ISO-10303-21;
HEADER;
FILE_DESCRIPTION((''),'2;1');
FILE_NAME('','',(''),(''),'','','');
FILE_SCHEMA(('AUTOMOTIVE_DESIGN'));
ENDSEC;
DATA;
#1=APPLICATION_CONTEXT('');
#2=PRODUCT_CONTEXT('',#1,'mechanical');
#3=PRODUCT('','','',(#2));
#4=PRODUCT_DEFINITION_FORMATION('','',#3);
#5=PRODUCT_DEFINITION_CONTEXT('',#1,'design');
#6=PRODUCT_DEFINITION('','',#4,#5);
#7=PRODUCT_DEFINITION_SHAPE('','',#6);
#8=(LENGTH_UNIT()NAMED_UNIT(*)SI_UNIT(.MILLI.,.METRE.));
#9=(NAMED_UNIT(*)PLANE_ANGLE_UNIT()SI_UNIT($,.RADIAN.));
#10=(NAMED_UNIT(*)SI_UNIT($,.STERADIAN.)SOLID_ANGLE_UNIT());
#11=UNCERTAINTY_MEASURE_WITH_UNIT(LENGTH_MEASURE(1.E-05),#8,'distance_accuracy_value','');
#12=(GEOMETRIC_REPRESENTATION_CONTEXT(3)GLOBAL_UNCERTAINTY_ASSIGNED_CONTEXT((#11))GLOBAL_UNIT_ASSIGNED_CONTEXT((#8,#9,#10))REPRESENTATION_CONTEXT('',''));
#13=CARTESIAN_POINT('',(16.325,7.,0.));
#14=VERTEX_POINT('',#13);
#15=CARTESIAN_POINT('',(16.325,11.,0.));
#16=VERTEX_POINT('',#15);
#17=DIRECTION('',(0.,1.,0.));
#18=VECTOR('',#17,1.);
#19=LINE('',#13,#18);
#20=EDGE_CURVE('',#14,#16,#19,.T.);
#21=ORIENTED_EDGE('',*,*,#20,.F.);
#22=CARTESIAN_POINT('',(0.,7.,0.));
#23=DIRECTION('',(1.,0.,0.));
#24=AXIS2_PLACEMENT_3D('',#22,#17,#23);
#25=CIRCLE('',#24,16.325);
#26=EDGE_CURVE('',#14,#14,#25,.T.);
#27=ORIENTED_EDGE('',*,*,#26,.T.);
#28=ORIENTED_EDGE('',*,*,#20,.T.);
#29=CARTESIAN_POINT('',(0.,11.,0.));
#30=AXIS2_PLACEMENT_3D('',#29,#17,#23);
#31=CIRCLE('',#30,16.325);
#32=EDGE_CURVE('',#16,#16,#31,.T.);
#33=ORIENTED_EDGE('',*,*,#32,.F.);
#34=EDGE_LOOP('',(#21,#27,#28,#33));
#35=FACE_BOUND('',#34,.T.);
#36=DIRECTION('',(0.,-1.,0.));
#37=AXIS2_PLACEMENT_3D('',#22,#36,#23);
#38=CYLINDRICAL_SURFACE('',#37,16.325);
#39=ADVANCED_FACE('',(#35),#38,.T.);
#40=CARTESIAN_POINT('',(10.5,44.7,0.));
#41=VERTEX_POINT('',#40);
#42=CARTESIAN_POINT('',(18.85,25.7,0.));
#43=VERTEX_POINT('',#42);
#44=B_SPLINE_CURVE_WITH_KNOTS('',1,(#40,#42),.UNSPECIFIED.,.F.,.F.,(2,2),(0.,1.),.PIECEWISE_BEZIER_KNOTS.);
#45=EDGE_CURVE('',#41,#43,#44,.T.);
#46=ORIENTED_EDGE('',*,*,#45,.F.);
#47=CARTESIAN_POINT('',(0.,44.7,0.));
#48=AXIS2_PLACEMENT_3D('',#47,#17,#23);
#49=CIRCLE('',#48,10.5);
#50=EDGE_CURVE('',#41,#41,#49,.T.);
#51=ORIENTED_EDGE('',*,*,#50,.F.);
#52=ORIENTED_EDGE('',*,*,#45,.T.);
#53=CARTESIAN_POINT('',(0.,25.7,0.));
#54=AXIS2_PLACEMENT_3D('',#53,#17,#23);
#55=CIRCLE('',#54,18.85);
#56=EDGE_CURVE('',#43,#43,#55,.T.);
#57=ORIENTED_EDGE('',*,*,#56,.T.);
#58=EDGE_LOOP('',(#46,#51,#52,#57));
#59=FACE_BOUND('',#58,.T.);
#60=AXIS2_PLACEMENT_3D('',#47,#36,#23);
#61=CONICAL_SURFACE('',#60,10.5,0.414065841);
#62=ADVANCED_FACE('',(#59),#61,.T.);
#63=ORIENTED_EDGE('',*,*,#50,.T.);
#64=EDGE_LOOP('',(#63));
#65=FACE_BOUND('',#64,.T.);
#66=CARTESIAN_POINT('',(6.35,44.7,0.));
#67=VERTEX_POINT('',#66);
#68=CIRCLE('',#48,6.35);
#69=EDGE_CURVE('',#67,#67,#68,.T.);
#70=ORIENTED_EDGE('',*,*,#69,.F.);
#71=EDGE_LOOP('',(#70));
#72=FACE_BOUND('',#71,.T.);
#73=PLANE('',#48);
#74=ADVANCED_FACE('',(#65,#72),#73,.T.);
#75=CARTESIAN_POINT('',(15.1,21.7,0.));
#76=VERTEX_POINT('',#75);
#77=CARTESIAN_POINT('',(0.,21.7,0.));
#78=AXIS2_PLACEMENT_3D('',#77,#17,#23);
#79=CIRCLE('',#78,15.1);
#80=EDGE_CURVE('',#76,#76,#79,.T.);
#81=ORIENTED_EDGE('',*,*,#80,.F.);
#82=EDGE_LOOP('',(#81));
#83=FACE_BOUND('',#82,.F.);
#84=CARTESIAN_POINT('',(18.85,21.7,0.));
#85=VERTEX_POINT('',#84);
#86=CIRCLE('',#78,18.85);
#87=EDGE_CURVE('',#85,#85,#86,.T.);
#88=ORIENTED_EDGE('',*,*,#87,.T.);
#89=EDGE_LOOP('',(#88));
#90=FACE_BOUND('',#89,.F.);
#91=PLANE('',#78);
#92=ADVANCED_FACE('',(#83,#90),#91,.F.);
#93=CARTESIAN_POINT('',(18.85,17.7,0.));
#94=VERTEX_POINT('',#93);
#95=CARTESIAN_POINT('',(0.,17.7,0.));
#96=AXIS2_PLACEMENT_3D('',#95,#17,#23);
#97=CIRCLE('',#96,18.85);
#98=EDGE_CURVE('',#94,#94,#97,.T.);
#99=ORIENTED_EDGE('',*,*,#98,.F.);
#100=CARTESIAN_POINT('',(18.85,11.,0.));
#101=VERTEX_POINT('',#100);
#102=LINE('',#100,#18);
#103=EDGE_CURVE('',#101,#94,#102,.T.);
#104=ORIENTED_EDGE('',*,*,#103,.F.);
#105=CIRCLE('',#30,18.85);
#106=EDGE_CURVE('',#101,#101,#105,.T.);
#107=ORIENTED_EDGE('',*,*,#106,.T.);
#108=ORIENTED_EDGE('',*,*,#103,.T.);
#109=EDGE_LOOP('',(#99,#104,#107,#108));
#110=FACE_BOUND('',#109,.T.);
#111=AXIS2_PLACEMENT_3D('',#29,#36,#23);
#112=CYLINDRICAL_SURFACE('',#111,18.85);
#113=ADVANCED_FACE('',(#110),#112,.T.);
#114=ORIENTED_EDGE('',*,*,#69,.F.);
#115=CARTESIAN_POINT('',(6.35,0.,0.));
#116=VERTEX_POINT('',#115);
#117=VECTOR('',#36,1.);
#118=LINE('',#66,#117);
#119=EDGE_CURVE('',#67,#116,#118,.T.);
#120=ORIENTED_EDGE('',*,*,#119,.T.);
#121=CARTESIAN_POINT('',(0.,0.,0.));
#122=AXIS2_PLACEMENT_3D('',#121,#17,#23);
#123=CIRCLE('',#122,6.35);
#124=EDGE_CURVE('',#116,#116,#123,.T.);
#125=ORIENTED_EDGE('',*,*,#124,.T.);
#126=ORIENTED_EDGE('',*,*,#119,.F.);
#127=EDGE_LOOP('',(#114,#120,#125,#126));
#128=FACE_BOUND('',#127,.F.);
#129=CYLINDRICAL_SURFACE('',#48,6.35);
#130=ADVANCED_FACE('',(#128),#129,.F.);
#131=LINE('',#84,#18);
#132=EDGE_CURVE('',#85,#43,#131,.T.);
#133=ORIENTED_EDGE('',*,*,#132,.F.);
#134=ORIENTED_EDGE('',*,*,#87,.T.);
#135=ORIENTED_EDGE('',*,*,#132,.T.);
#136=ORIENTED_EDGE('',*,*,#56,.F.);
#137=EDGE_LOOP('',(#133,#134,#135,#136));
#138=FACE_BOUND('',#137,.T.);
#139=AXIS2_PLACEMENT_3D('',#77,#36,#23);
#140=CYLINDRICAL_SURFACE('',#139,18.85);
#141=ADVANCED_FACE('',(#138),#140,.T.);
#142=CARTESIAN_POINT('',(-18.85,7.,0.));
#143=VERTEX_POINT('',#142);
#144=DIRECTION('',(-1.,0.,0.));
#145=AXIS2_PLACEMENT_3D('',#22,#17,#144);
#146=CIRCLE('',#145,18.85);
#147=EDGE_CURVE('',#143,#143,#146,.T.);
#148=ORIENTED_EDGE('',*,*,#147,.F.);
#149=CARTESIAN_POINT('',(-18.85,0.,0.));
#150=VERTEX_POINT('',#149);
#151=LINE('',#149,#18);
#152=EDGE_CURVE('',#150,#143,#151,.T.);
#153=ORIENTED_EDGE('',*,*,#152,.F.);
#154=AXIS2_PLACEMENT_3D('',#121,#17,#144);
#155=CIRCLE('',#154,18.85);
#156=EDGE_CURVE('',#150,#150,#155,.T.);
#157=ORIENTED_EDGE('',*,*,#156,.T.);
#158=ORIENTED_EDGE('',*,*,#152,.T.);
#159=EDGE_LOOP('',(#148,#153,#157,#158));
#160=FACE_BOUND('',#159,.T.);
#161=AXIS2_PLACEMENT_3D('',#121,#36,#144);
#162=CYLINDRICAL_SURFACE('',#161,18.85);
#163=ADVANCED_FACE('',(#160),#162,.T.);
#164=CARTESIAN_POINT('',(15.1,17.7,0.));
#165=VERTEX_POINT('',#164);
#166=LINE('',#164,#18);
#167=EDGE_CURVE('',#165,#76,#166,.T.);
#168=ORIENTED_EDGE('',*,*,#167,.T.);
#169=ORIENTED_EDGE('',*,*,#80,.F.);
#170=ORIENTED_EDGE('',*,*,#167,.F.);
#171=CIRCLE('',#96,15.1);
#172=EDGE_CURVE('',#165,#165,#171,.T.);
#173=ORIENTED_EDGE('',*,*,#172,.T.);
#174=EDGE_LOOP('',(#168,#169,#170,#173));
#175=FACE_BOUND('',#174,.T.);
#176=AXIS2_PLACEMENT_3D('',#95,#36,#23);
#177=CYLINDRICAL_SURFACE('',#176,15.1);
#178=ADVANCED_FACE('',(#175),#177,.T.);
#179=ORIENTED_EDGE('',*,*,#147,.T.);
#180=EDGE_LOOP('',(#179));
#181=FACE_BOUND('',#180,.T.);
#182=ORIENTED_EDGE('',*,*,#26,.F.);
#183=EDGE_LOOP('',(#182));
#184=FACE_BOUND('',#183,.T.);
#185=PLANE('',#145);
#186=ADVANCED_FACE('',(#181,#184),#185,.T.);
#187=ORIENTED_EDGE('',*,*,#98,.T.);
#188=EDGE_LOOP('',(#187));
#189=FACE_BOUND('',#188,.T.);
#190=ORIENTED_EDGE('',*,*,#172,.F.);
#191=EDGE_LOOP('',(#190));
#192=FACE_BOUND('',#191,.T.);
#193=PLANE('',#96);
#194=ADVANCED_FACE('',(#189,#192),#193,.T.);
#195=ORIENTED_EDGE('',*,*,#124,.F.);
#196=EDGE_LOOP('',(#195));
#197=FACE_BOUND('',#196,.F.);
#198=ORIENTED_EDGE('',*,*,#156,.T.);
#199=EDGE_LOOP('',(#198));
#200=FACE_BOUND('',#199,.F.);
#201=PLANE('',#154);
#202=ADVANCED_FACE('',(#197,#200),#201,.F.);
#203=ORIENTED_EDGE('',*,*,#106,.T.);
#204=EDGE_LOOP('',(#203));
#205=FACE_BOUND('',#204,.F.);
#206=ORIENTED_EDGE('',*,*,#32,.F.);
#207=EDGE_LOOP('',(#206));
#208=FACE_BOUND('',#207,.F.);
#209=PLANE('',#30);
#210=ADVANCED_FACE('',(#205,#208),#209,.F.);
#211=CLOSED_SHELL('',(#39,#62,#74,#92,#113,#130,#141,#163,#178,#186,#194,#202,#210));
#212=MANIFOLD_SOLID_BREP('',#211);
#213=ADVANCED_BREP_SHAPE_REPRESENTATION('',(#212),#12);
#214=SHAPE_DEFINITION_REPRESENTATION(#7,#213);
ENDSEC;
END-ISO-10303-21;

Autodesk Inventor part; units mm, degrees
ref_plane "YZ Plane" through (0, 0, 0) normal (1, 0, 0) x (0, 1, 0)
ref_plane "XZ Plane" through (0, 0, 0) normal (0, 1, 0) x (-1, 0, 0)
sketch "Sketch1" plane through (0, 0, 0) normal (0, 1, 0) x (-1, 0, 0)
  circle A0 centre (0, 0) radius 18.85
  dimension "d0" = 37.7
extrude "Extrusion1" add sketch "Sketch1" along normal blind 7
sketch "Sketch2" plane through (0, 7, 0) normal (0, 1, 0) x (1, 0, 0)
  circle A0 centre (0, 0) radius 16.325
  dimension "d3" = 32.65
extrude "Extrusion2" add sketch "Sketch2" along normal blind 4
sketch "Sketch3" plane through (0, 11, 0) normal (0, 1, 0) x (1, 0, 0)
  circle A0 centre (0, 0) radius 18.85
  dimension "d6" = 37.7
extrude "Extrusion3" add sketch "Sketch3" along normal blind 6.7
sketch "Sketch4" plane through (0, 17.7, 0) normal (0, 1, 0) x (1, 0, 0)
  circle A0 centre (0, 0) radius 15.1
  dimension "d9" = 30.2
extrude "Extrusion4" add sketch "Sketch4" along normal blind 4
sketch "Sketch5" plane through (0, 21.7, 0) normal (0, 1, 0) x (1, 0, 0)
  circle A0 centre (0, 0) radius 18.85
  dimension "d12" = 37.7
extrude "Extrusion5" add sketch "Sketch5" along normal blind 4
ref_plane "Work Plane1" through (0, 44.7, 0) normal (0, 1, 0) x (1, 0, 0)
sketch "Sketch6" plane through (0, 44.7, 0) normal (0, 1, 0) x (1, 0, 0)
  circle A0 centre (0, 0) radius 10.5
  dimension "d16" = 21
loft "Loft1" add profiles "Sketch6" section 2 edges at (-18.85, 25.7, 0)
sketch "Sketch7" plane through (0, 44.7, 0) normal (0, 1, 0) x (1, 0, 0)
  circle A0 centre (0, 0) radius 6.35
  dimension "d21" = 12.7
extrude "Extrusion6" cut sketch "Sketch7" against normal through all
properties part number "Soporte Intermedio" material "Steel, Alloy"
